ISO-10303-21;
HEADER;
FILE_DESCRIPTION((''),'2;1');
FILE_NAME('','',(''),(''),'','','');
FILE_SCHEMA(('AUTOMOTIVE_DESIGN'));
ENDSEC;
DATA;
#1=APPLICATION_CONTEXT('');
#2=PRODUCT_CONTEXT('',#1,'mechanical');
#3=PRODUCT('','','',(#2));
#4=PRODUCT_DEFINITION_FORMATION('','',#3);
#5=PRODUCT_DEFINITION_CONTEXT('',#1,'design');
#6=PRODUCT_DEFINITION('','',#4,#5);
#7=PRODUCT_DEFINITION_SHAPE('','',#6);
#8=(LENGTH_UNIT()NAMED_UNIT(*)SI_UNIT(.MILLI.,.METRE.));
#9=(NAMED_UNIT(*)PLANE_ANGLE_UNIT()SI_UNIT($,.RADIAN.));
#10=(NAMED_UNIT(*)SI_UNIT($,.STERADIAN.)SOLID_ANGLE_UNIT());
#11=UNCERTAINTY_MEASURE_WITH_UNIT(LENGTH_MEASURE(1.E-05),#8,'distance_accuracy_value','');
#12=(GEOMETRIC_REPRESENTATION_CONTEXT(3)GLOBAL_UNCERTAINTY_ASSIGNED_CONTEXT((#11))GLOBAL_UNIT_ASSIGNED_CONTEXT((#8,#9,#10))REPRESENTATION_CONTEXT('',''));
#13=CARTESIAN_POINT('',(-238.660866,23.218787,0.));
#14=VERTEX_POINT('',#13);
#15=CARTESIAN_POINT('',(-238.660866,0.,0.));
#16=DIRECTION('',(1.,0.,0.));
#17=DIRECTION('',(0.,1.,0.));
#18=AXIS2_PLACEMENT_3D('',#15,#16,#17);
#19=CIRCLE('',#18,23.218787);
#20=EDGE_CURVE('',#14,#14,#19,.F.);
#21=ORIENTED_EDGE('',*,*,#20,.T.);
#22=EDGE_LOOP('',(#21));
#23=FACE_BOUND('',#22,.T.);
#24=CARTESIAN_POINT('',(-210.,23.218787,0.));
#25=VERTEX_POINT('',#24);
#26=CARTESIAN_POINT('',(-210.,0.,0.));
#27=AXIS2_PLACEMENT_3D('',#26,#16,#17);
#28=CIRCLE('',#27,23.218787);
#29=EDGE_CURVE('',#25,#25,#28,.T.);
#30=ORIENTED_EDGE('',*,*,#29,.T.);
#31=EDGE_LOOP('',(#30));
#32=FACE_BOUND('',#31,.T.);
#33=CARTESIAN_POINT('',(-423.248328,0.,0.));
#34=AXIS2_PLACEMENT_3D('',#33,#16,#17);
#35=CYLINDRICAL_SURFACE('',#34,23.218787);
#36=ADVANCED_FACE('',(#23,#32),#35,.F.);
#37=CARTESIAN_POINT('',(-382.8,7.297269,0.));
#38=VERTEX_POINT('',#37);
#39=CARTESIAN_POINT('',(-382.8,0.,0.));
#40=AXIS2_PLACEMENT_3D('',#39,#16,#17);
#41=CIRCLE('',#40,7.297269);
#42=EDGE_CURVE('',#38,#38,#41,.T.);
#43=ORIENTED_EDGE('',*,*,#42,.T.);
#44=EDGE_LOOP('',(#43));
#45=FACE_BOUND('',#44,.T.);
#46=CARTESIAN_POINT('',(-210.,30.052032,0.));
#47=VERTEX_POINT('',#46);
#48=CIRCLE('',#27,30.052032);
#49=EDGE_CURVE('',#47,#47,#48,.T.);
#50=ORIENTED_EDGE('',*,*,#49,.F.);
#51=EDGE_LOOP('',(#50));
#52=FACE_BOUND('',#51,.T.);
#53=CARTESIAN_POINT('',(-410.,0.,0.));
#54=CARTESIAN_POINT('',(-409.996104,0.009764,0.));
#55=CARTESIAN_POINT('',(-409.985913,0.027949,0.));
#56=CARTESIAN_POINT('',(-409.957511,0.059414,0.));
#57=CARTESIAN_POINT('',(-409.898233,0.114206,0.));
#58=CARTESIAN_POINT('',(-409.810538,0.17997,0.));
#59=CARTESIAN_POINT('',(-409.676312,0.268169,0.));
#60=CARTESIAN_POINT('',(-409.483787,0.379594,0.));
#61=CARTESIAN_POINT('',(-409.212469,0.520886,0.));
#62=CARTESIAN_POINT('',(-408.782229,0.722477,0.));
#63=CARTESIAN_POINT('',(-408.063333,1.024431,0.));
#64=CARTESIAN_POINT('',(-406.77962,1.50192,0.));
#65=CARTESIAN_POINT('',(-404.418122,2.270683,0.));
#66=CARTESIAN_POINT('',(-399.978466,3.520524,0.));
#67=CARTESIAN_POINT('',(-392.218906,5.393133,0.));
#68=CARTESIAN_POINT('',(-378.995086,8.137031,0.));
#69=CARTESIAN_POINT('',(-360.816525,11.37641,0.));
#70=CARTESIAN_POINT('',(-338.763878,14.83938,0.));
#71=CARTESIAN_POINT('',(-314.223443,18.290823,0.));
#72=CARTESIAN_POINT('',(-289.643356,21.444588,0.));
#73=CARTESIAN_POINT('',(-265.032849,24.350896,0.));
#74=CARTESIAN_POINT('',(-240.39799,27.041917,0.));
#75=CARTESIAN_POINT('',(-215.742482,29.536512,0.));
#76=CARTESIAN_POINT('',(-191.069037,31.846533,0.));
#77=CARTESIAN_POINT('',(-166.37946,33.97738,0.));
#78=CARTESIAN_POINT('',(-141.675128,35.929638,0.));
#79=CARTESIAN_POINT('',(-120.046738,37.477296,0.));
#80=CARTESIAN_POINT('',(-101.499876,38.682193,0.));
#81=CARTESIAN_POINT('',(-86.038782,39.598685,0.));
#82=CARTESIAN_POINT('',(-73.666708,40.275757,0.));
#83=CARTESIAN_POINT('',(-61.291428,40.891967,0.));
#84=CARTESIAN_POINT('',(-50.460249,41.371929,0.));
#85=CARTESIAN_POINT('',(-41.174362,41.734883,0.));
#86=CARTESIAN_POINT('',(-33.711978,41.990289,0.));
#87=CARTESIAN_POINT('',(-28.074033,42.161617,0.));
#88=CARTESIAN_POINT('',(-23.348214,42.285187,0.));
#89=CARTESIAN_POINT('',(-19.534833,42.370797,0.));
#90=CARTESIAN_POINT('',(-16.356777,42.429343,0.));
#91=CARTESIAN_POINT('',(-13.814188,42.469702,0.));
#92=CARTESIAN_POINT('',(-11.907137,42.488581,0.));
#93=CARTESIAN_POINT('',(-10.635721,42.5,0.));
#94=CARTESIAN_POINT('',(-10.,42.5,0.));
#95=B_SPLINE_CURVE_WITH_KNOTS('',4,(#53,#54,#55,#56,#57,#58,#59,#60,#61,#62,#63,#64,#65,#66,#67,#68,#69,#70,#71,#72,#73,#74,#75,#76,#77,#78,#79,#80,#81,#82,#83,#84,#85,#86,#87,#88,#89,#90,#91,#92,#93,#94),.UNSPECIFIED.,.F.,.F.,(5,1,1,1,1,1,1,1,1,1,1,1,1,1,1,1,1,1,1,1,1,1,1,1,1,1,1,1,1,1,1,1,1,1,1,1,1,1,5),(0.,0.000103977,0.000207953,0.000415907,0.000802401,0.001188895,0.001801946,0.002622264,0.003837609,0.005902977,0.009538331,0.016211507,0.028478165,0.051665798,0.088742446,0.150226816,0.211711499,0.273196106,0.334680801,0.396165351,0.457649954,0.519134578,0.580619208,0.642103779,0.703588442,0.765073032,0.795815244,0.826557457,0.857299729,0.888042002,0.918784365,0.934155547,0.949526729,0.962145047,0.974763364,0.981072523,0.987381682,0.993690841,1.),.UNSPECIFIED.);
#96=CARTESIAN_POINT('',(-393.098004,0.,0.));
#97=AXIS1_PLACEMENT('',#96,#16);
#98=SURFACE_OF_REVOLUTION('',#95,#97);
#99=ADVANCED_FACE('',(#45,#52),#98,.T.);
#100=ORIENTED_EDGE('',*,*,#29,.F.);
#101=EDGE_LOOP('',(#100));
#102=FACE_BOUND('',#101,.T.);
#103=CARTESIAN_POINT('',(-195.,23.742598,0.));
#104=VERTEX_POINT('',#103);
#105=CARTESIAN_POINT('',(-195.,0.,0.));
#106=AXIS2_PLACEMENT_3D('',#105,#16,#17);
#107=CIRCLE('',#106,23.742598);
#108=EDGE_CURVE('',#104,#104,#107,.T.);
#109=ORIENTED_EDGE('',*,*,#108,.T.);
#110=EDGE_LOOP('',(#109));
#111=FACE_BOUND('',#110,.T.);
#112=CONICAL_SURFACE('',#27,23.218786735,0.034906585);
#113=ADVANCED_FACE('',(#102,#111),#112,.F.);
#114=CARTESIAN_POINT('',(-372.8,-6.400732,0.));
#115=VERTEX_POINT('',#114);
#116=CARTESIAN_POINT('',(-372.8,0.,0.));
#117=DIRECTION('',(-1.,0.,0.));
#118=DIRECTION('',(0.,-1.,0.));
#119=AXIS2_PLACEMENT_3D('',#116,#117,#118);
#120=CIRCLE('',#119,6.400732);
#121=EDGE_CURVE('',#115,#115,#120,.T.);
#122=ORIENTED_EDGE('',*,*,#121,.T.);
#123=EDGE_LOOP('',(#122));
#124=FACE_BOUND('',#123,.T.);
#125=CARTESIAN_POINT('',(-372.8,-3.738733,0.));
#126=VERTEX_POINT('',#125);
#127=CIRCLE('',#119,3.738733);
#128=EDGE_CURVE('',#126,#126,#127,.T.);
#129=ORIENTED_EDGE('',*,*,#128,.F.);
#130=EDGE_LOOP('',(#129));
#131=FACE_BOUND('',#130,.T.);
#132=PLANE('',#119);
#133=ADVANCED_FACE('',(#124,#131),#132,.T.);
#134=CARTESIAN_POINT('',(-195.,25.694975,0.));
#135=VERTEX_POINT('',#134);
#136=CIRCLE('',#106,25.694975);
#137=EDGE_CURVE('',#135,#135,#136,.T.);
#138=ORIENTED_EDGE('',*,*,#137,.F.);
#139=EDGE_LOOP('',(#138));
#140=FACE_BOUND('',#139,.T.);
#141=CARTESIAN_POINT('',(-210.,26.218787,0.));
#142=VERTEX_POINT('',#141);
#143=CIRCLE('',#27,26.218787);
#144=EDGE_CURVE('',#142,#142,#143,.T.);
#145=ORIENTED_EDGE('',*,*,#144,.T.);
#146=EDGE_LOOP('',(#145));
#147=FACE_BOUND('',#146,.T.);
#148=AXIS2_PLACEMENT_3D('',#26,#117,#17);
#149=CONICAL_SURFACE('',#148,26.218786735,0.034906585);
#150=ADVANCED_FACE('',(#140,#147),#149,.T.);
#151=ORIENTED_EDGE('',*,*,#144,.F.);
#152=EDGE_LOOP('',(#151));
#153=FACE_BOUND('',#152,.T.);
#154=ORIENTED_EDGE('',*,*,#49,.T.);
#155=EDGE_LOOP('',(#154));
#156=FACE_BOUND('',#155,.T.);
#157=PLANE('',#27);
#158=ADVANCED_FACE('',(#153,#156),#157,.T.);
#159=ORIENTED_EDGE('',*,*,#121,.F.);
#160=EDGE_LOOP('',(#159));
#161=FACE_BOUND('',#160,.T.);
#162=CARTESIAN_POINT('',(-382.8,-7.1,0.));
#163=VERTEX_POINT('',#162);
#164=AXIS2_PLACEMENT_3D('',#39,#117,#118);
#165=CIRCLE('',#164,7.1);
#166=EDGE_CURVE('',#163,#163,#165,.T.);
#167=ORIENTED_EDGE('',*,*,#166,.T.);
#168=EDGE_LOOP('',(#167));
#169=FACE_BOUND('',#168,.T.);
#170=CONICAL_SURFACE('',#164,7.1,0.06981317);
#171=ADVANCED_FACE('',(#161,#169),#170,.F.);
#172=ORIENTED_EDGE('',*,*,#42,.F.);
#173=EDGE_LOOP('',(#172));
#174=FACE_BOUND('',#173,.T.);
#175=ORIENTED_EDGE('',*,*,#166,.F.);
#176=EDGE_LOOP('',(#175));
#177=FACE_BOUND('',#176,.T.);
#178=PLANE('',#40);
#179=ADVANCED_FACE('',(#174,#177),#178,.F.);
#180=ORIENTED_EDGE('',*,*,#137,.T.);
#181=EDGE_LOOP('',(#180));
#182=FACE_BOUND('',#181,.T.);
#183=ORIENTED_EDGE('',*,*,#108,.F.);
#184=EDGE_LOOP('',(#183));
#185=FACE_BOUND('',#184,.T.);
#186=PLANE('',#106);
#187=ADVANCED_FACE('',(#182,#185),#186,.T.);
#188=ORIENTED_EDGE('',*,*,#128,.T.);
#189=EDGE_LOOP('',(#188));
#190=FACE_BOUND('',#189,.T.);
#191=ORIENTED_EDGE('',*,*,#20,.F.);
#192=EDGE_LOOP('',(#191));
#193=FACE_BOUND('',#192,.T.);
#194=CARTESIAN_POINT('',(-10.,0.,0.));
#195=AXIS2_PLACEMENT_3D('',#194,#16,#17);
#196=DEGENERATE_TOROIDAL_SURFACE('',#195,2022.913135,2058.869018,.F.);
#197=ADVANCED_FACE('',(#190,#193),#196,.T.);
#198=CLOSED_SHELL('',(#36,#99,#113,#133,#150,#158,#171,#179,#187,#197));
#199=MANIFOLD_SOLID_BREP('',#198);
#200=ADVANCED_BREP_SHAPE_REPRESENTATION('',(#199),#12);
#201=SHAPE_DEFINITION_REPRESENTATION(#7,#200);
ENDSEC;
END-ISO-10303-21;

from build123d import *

# Parameters (mm, degrees)
SKETCH15_R         = 7.1
CUT_EXTRUDE1_DEPTH = 10
CUT_EXTRUDE1_DRAFT = -4


# Read off the part's stored shape, not the designer's step: Boss-Extrude1
with BuildPart() as part:
    # Sketch1 → Revolve1 (revolve)
    with BuildSketch(Plane.XY):
        with BuildLine():
            Line((-87.413336082, 34.5), (0, 34.5))
            Line((0, 34.5), (0, 39.5))
            Line((0, 39.5), (-10, 39.5))
            Line((-10, 39.5), (-10, 42.5))
            add(Edge.make_bspline(
                [(-410, 0), (-409.996104343, 0.009764497), (-409.985913153, 0.027949075), (-409.957510571, 0.059414303), (-409.898233488, 0.114206215), (-409.810537783, 0.179970098), (-409.676312366, 0.268169047), (-409.483787304, 0.379593537), (-409.212469032, 0.520885741), (-408.782228648, 0.722476645), (-408.063332817, 1.024430726), (-406.77961993, 1.501919518), (-404.418121728, 2.27068301), (-399.978466324, 3.520524256), (-392.218905515, 5.393132921), (-378.995085532, 8.137030847), (-360.816525389, 11.376409579), (-338.763877653, 14.839380374), (-314.223443016, 18.290822778), (-289.643356303, 21.444587663), (-265.032848706, 24.35089646), (-240.39799038, 27.041916752), (-215.742482432, 29.536512433), (-191.069036766, 31.846533123), (-166.379459519, 33.977380219), (-141.675128406, 35.929637856), (-120.046737987, 37.477295551), (-101.49987599, 38.68219301), (-86.03878208, 39.598684687), (-73.666707864, 40.275756821), (-61.291427842, 40.89196691), (-50.460249117, 41.371928643), (-41.174361888, 41.734883373), (-33.711978303, 41.990289017), (-28.074032831, 42.161616919), (-23.34821361, 42.285186922), (-19.53483297, 42.370797081), (-16.35677709, 42.429342551), (-13.814187886, 42.46970241), (-11.907137026, 42.488580832), (-10.635720501, 42.5), (-10, 42.5)],
                knots=[0, 0, 0, 0, 0, 0.000103977, 0.000207953, 0.000415907, 0.000802401, 0.001188895, 0.001801946, 0.002622264, 0.003837609, 0.005902977, 0.009538331, 0.016211507, 0.028478165, 0.051665798, 0.088742446, 0.150226816, 0.211711499, 0.273196106, 0.334680801, 0.396165351, 0.457649954, 0.519134578, 0.580619208, 0.642103779, 0.703588442, 0.765073032, 0.795815244, 0.826557457, 0.857299729, 0.888042002, 0.918784365, 0.934155547, 0.949526729, 0.962145047, 0.974763364, 0.981072523, 0.987381682, 0.993690841, 1, 1, 1, 1, 1], degree=4))
            Line((-410, 0), (-393.098004327, 0))
            ThreePointArc((-393.098004327, 0), (-240.900922824, 22.967212555), (-87.413336082, 34.5))
        make_face()
    revolve(axis=Axis((-393.098004327, 0, 0), (-1, 0, 0)))

    # SurfaceCut1
    split(bisect_by=Plane(origin=(-210, 0, 0), x_dir=(0, 0, -1), z_dir=(1, 0, 0)), keep=Keep.BOTTOM)

    # Boss-Extrude1 outline → Boss-Extrude1 (revolve)
    with BuildSketch(Plane.YX):
        Polygon((25.694975193, -195), (23.742598278, -195), (23.218786735, -210), (23.218786735, -238.660865761), (26.218786735, -238.660865761), (26.218786735, -210), align=None)
    revolve(axis=Axis((0, 0, 0), (1, 0, 0)))

    # SurfaceCut2
    split(bisect_by=Plane(origin=(-382.8, 0, 0), x_dir=(0, 0, -1), z_dir=(1, 0, 0)), keep=Keep.TOP)


with BuildPart() as cut_extrude1_tool:
    # Sketch15 → Cut-Extrude1 (with draft: the straight prism first)
    with BuildSketch(Plane.ZY.offset(382.8)):
        Circle(SKETCH15_R)
    extrude(amount=-CUT_EXTRUDE1_DEPTH)
    # Cut-Extrude1: the draft: its side faces are tilted about the plane it starts from
    cut_extrude1_sides = [cut_extrude1_tool.faces().sort_by_distance(p)[0] for p in [
        (-377.8, 0, -7.1),
    ]]
    draft(cut_extrude1_sides, Plane.ZY.offset(382.8), CUT_EXTRUDE1_DRAFT)


with BuildPart() as part_1:
    add(part.part)

    # Cut-Extrude1: cut by cut_extrude1_tool
    add(cut_extrude1_tool.part, mode=Mode.SUBTRACT)


solid = part_1.part
